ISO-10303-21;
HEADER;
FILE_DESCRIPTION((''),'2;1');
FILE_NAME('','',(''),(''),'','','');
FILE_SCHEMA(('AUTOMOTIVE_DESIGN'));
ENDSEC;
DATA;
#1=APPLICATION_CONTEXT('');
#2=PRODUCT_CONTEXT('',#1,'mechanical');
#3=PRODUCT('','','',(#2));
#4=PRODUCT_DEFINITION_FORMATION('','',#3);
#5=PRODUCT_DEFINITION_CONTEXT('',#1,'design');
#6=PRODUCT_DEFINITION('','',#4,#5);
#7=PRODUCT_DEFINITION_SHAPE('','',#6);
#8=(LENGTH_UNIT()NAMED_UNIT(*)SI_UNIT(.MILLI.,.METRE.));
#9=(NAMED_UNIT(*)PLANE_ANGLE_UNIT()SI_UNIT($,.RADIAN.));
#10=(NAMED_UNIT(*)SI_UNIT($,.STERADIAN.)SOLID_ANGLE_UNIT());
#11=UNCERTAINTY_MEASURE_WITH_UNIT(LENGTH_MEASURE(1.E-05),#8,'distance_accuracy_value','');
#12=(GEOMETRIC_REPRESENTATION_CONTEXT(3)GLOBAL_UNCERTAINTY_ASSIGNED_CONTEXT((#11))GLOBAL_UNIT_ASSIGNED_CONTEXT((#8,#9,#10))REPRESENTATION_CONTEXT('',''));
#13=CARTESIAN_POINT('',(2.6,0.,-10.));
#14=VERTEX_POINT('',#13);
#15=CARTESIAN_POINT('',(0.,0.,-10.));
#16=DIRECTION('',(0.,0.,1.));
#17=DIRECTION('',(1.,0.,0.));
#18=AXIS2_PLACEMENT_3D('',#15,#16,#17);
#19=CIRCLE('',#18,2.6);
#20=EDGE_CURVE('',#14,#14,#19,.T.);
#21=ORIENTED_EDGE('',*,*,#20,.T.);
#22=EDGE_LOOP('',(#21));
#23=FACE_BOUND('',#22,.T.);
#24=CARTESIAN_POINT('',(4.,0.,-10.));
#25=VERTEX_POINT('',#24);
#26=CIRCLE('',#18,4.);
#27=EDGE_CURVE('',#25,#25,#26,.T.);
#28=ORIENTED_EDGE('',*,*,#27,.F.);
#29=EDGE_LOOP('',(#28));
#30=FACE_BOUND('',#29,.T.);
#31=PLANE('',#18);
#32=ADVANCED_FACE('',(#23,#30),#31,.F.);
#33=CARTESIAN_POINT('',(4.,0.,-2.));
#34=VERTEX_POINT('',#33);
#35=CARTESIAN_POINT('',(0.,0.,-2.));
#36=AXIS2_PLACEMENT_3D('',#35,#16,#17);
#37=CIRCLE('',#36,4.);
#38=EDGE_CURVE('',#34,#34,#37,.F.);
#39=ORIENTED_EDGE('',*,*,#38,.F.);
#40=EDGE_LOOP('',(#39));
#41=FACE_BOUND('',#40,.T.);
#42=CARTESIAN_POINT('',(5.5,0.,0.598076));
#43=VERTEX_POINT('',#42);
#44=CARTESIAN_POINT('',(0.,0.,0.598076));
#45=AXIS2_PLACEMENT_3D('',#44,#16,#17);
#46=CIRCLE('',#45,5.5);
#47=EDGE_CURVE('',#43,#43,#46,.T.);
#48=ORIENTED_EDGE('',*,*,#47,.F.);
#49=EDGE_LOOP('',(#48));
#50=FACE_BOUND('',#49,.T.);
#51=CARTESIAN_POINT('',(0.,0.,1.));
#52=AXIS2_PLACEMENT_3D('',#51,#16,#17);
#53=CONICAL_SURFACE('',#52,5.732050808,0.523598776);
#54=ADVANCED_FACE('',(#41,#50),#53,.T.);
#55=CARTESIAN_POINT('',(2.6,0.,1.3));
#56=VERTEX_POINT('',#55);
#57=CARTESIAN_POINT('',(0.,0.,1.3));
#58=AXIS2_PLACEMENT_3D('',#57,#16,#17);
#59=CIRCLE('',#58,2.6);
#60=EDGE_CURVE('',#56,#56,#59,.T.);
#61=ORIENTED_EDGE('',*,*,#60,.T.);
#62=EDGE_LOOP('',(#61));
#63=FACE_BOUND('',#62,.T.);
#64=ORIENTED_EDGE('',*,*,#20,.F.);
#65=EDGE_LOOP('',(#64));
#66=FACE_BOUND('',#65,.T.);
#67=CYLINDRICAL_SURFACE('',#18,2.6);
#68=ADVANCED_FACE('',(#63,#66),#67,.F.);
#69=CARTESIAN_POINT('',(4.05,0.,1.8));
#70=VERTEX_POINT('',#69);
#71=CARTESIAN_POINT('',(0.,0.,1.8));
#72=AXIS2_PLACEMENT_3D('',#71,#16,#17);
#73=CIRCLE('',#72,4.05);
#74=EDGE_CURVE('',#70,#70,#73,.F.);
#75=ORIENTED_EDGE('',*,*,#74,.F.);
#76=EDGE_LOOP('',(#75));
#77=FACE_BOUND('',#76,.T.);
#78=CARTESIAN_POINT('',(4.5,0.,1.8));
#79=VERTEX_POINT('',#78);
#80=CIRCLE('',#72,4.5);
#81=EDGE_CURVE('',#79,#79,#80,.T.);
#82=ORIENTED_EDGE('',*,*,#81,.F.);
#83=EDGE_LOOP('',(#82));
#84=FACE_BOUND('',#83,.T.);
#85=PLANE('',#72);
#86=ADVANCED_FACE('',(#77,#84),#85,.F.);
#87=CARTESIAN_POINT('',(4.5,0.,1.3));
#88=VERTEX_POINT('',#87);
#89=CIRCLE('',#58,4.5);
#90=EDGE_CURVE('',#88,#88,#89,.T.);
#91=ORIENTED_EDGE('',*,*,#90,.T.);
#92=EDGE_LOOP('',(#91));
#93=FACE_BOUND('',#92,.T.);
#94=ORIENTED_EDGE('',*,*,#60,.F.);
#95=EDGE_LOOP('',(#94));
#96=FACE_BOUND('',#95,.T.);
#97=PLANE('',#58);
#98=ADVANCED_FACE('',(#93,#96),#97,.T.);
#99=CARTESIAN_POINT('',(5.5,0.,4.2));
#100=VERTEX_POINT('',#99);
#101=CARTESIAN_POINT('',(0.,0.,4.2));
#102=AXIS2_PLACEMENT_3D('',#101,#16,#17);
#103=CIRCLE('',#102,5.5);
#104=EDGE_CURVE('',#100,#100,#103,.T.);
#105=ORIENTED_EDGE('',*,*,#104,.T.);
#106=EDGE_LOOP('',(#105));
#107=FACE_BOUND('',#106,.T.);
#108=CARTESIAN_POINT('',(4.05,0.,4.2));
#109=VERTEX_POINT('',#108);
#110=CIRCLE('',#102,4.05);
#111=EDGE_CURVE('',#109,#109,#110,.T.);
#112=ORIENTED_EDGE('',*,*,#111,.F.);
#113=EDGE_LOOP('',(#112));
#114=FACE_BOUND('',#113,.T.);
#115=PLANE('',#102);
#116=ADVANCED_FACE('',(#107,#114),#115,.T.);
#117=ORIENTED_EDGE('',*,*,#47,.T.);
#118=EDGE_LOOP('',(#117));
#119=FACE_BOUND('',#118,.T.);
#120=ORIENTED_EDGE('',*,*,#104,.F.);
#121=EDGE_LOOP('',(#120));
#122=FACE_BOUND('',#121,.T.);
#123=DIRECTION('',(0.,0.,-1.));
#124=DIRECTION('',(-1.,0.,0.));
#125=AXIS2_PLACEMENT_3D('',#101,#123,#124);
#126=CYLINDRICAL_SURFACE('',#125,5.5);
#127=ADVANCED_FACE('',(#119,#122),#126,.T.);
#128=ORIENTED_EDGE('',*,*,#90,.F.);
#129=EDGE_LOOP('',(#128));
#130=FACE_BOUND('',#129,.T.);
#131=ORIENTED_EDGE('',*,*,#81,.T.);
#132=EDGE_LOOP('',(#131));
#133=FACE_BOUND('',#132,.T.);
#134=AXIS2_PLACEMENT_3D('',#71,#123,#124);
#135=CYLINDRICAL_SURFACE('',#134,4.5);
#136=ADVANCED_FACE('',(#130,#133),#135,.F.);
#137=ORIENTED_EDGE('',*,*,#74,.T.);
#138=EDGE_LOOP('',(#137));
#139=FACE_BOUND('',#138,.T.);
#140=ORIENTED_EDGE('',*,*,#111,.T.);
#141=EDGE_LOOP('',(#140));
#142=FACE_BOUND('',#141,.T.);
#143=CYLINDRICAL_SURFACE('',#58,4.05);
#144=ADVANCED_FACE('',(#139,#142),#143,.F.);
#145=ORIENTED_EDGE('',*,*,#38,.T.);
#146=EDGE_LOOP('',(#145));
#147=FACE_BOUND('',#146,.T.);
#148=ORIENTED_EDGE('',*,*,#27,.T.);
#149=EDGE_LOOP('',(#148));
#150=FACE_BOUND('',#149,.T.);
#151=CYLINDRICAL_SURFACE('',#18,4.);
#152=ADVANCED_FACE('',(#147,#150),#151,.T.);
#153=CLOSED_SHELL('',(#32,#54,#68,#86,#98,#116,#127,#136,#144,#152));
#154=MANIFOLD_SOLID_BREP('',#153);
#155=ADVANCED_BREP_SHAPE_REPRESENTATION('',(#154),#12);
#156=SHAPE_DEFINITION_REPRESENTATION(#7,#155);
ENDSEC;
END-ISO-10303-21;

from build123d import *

# Parameters (mm, degrees)
BOSS_EXTRUDE1_DEPTH      = 1
BOSS_EXTRUDE1_DEPTH_BACK = 10
SKETCH1_R                = 4
SKETCH1_R_2              = 2.6
SKETCH2_R                = 5.5
BOSS_EXTRUDE2_DEPTH      = 3.2
SKETCH3_R                = 4.05
CUT_EXTRUDE1_DEPTH       = 2.9
SKETCH4_R                = 2.6
CUT_EXTRUDE2_DEPTH       = 17.190738093
SKETCH5_R                = 4.5
CUT_EXTRUDE3_DEPTH       = 0.5
CHAMFER1_SIZE            = 1.732050808
CHAMFER1_SIZE_2          = 3


with BuildPart() as part:
    # Sketch1 → Boss-Extrude1 (new, two sides: drawn at the far end of the back side and taken through both)
    with BuildSketch(Plane.XY.offset(-BOSS_EXTRUDE1_DEPTH_BACK)):
        Circle(SKETCH1_R)
        Circle(SKETCH1_R_2, mode=Mode.SUBTRACT)
    extrude(amount=BOSS_EXTRUDE1_DEPTH + BOSS_EXTRUDE1_DEPTH_BACK)

    # Sketch2 → Boss-Extrude2 (add)
    with BuildSketch(Plane.XY.offset(1)):
        Circle(SKETCH2_R)
    extrude(amount=BOSS_EXTRUDE2_DEPTH)

    # Sketch3 → Cut-Extrude1 (cut)
    with BuildSketch(Plane.XY.offset(4.2)):
        Circle(SKETCH3_R)
    extrude(amount=-CUT_EXTRUDE1_DEPTH, mode=Mode.SUBTRACT)

    # Sketch4 → Cut-Extrude2 (cut, through all)
    with BuildSketch(Plane(origin=(0, 0, -10), x_dir=(-1, 0, 0), z_dir=(0, 0, -1))):
        with Locations(Location((0, 0, 0), (0, 0, 180))):
            Circle(SKETCH4_R)
    extrude(amount=-CUT_EXTRUDE2_DEPTH, mode=Mode.SUBTRACT)

    # Sketch5 → Cut-Extrude3 (cut)
    with BuildSketch(Plane.XY.offset(1.3)):
        Circle(SKETCH5_R)
    extrude(amount=CUT_EXTRUDE3_DEPTH, mode=Mode.SUBTRACT)

    # Chamfer1
    # the kernel refuses this chamfer: 3, 1.732050808 mm, written as the material it adds along each edge
    with BuildSketch(Plane(origin=(0, 0, 1), x_dir=(1, 0, 0), z_dir=(0, -1, 0))) as chamfer1_piece_1_section:
        Polygon((4 + CHAMFER1_SIZE, 0), (4, -CHAMFER1_SIZE_2), (4, 0), align=None)
    chamfer1_piece_1 = revolve(axis=Axis((0, 0, 1), (0, 0, 1)), mode=Mode.PRIVATE)
    chamfer1_piece_1 = chamfer1_piece_1 & Plane(origin=(0, 0, -0.731250221), x_dir=(1, 0, 0), z_dir=(0, 0, -1)) * Cylinder(5.5, 23, mode=Mode.PRIVATE)
    add(chamfer1_piece_1)


solid = part.part
